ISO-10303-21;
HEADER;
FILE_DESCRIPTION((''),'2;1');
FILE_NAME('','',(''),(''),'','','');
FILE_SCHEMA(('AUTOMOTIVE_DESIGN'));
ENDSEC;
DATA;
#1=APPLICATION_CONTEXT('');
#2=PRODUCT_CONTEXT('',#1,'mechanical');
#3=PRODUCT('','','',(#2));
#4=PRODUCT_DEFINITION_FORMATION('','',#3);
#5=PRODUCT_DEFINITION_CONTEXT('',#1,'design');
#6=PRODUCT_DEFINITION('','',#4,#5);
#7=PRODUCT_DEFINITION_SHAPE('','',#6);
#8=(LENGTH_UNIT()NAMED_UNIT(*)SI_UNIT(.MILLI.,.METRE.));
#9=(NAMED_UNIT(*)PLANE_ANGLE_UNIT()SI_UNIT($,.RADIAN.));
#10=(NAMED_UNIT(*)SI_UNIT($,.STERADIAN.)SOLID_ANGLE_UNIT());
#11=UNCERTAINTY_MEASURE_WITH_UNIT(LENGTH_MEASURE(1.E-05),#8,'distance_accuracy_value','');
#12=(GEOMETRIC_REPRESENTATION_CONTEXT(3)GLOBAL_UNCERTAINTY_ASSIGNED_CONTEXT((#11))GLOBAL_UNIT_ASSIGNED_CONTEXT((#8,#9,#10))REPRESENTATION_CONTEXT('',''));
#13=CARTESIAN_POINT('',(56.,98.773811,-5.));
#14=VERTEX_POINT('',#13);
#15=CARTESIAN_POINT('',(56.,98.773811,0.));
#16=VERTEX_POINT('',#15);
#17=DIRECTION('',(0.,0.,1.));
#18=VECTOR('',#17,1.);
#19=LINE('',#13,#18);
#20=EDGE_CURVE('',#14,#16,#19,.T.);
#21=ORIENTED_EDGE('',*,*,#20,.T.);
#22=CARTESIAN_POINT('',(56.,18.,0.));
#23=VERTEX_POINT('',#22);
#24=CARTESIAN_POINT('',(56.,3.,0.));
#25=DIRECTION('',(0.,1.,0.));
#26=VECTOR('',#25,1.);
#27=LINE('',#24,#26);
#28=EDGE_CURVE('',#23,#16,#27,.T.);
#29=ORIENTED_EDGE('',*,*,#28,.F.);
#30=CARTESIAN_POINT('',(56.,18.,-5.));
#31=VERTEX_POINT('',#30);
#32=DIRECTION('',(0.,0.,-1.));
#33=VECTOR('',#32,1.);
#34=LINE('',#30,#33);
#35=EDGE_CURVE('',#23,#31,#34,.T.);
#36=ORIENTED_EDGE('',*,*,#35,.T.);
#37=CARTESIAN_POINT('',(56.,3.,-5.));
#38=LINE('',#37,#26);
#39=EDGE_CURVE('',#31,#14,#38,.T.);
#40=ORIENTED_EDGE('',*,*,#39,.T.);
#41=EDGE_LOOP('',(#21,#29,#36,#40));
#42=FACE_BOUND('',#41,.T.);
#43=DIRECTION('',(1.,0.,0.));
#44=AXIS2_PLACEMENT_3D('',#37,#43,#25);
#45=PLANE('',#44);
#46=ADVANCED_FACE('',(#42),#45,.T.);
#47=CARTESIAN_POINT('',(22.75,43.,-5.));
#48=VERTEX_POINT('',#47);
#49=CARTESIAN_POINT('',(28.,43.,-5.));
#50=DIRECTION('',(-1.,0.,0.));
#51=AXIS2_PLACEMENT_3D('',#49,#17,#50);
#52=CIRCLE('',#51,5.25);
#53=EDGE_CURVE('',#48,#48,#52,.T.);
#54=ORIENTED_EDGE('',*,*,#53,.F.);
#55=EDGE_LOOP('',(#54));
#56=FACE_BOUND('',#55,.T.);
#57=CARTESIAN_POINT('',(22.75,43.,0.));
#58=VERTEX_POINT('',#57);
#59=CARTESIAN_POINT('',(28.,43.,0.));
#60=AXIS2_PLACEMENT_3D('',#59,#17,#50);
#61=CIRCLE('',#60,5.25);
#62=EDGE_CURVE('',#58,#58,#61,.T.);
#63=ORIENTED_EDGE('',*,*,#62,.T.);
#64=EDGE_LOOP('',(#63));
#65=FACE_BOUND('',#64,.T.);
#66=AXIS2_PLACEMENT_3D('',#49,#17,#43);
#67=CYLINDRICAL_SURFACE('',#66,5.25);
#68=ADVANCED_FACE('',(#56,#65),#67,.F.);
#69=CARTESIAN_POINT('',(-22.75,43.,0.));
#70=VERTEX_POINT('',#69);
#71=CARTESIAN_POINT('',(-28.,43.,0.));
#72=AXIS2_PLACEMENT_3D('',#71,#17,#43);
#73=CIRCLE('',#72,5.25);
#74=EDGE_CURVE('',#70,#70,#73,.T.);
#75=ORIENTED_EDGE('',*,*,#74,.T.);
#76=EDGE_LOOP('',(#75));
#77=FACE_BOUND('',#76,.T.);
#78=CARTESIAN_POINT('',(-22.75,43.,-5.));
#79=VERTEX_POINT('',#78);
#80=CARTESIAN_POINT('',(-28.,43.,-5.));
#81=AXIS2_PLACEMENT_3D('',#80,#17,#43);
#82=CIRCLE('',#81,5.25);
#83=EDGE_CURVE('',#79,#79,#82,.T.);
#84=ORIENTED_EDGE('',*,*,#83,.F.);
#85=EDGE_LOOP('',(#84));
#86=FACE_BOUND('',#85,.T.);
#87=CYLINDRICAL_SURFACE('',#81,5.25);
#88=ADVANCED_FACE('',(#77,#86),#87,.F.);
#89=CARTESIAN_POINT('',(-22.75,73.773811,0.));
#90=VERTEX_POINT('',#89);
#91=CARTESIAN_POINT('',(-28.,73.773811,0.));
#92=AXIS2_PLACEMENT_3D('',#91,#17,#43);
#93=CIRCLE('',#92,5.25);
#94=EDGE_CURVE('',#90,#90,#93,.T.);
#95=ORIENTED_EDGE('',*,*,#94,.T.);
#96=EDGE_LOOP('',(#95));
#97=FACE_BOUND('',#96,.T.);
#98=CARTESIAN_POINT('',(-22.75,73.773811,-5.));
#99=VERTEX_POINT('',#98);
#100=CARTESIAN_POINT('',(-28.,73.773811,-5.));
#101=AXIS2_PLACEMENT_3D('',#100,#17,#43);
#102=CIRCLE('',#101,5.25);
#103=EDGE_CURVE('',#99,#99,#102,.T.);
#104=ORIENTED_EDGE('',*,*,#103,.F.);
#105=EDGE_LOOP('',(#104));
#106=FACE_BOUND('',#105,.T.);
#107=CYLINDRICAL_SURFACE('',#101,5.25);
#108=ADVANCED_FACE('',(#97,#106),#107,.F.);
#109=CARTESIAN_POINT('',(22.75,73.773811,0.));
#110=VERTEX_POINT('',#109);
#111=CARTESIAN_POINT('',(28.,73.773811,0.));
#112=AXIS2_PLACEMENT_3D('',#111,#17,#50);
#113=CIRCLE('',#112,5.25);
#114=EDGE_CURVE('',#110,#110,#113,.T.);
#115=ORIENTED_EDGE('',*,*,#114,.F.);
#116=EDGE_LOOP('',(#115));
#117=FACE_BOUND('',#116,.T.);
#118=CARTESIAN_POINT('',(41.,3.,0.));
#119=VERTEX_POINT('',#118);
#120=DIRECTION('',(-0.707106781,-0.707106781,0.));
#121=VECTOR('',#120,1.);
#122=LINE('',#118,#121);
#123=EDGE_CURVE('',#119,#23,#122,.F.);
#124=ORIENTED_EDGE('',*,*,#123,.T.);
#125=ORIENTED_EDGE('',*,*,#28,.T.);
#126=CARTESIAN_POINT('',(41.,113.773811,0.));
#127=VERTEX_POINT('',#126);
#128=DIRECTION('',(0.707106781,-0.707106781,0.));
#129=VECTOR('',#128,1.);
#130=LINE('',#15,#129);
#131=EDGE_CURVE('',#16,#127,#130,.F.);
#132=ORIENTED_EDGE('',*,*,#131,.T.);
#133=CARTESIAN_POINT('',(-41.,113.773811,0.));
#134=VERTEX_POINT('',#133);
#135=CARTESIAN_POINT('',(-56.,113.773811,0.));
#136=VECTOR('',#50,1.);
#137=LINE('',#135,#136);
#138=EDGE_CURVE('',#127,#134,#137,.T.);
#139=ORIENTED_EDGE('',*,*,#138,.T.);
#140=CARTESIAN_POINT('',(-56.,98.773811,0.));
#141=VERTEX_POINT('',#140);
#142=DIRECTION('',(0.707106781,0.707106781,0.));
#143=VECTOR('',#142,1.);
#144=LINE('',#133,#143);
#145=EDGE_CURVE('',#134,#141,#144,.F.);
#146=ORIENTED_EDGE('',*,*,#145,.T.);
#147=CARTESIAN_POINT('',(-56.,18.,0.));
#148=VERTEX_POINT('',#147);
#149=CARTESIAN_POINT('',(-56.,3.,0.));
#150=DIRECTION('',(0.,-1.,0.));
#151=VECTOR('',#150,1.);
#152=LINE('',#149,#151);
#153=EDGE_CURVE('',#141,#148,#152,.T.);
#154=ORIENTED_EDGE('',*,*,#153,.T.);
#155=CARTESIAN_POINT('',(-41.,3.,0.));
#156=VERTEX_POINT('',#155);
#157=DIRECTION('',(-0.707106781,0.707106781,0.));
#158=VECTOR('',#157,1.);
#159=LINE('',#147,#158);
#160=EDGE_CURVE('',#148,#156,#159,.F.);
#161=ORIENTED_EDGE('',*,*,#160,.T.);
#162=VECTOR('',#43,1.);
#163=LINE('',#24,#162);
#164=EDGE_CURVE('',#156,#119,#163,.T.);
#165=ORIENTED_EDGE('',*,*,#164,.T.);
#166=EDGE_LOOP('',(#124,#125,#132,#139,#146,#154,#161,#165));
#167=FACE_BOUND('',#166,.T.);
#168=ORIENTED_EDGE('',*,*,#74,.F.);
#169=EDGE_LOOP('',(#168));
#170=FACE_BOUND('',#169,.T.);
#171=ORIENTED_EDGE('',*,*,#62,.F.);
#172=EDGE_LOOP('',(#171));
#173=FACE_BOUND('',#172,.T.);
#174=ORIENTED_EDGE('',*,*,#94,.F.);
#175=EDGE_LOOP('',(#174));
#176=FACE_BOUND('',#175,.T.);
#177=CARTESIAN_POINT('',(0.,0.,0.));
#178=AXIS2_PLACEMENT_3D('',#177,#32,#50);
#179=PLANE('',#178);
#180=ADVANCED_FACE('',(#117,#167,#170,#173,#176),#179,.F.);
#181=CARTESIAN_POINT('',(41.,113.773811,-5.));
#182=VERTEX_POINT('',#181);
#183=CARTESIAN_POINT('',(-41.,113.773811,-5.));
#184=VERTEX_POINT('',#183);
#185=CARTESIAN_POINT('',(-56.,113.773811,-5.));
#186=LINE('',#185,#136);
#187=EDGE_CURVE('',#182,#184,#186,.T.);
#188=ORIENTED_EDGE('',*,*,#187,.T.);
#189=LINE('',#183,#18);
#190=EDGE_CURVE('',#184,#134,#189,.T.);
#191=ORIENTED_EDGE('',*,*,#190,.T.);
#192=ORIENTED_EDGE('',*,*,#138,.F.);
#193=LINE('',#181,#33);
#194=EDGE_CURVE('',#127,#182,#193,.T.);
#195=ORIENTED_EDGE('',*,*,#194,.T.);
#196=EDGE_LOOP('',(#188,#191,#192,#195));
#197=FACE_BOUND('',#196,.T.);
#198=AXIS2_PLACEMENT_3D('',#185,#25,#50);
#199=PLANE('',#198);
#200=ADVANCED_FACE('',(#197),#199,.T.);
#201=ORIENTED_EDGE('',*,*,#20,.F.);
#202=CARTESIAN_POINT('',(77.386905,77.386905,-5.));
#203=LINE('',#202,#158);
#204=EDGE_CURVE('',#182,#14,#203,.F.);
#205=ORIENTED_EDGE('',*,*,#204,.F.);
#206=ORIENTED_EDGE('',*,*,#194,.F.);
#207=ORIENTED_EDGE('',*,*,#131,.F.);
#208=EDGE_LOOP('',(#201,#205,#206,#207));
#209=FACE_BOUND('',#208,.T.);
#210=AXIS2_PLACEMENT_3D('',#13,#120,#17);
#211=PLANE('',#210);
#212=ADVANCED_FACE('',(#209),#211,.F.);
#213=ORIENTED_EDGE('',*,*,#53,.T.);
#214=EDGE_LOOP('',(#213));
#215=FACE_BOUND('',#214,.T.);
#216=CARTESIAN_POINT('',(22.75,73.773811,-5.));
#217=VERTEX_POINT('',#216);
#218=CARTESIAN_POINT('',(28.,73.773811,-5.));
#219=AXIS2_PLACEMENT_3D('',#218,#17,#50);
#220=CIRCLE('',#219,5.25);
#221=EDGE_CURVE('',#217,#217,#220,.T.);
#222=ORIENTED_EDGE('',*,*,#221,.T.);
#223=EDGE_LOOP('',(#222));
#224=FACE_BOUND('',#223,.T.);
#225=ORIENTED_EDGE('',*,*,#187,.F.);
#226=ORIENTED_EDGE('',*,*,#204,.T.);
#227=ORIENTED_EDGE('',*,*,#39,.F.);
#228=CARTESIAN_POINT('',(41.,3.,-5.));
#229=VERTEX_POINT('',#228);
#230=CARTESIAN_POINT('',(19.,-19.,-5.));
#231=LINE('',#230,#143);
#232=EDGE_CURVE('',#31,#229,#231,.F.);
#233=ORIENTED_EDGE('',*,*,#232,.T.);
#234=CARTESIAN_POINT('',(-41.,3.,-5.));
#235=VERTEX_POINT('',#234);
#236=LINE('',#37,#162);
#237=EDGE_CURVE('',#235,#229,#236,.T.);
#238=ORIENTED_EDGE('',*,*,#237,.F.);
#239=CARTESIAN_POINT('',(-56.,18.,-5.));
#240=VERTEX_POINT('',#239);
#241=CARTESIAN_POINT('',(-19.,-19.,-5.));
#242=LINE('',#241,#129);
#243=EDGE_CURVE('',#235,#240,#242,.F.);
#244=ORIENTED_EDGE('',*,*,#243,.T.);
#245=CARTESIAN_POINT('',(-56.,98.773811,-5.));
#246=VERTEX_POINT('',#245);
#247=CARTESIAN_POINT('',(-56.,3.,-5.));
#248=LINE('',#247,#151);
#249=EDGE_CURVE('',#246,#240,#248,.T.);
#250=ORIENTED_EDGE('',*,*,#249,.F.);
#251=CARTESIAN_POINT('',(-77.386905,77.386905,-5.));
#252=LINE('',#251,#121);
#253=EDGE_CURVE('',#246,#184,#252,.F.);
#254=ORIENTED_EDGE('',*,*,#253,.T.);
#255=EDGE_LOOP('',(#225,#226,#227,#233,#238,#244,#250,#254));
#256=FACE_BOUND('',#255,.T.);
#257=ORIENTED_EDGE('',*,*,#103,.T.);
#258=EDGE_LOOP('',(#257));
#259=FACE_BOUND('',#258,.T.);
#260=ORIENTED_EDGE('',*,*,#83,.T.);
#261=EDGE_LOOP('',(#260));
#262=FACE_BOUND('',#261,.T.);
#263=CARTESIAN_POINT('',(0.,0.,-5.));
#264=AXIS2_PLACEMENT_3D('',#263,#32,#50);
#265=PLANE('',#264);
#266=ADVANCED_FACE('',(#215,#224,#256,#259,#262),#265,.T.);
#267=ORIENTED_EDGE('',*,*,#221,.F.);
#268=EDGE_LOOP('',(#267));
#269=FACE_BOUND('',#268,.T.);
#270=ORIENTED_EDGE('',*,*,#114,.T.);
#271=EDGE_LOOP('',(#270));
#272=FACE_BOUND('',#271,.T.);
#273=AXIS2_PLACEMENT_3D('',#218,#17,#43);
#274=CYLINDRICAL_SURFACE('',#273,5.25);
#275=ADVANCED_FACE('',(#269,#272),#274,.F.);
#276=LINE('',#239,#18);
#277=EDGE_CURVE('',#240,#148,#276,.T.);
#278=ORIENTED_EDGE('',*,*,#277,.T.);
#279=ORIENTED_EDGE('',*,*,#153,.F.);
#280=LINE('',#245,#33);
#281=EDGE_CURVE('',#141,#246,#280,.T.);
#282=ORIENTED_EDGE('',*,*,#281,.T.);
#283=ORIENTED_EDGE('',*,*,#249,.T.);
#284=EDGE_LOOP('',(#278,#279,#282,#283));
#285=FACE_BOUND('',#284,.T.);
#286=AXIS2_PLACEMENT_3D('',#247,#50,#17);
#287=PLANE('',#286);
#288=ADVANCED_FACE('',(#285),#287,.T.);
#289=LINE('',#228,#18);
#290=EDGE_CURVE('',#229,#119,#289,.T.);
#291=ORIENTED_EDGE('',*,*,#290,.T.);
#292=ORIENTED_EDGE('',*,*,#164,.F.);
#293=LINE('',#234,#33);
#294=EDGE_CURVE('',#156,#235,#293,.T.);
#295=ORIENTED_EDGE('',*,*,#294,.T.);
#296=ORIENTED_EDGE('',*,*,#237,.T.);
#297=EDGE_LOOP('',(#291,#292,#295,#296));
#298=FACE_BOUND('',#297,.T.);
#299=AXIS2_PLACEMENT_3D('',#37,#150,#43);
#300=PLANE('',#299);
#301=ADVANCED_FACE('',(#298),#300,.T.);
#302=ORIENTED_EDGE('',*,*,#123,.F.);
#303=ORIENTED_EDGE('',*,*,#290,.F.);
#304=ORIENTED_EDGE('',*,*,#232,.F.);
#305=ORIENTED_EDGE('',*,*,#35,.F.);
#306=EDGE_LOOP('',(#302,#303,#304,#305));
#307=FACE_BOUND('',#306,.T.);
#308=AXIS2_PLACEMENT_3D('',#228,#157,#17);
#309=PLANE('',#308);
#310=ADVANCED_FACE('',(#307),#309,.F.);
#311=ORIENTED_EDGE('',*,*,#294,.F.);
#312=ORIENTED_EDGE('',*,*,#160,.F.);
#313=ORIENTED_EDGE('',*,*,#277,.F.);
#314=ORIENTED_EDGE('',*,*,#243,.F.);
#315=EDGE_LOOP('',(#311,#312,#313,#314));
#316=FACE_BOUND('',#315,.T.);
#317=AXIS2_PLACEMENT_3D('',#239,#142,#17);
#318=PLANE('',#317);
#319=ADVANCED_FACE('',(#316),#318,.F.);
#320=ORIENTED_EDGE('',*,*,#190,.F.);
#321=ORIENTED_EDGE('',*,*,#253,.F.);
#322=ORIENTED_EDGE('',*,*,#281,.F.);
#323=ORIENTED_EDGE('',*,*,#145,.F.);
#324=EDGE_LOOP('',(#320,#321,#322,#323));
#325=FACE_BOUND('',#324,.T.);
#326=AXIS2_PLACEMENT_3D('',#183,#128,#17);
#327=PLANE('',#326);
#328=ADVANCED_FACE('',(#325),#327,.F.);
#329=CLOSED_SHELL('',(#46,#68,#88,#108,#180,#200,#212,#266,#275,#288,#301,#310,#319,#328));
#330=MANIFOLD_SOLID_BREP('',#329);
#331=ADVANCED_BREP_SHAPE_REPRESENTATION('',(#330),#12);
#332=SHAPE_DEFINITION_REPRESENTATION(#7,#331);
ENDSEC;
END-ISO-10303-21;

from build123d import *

# Parameters (mm, degrees)
SKETCH_1_W             = 112
SKETCH_1_H             = 110.77381068
SKETCH_1_R             = 5.25
SM_BASE_FLANGE_1_DEPTH = 5
CHAMFER_1_SIZE         = 15


# Sheet-metal steps are written as plain solids
with BuildPart() as part:
    # Sketch 1 → Базовая кромка1 (new body)
    with BuildSketch(Plane.XY):
        with Locations((0, 58.38690534)):
            Rectangle(SKETCH_1_W, SKETCH_1_H)
        with Locations((-28, 73.77381068)):
            Circle(SKETCH_1_R, mode=Mode.SUBTRACT)
        with Locations((-28, 43)):
            Circle(SKETCH_1_R, mode=Mode.SUBTRACT)
        with Locations(Location((28, 73.77381068, 0), (0, 0, 180))):
            Circle(SKETCH_1_R, mode=Mode.SUBTRACT)
        with Locations(Location((28, 43, 0), (0, 0, 180))):
            Circle(SKETCH_1_R, mode=Mode.SUBTRACT)
    extrude(amount=-SM_BASE_FLANGE_1_DEPTH)

    # Фаска1
    chamfer_1_edges = [part.edges().sort_by_distance(p)[0] for p in [
        (56, 3, -2.5),
        (-56, 3, -2.5),
        (-56, 113.77381068, -2.5),
        (56, 113.77381068, -2.5),
    ]]
    chamfer(chamfer_1_edges, length=CHAMFER_1_SIZE)


solid = part.part
